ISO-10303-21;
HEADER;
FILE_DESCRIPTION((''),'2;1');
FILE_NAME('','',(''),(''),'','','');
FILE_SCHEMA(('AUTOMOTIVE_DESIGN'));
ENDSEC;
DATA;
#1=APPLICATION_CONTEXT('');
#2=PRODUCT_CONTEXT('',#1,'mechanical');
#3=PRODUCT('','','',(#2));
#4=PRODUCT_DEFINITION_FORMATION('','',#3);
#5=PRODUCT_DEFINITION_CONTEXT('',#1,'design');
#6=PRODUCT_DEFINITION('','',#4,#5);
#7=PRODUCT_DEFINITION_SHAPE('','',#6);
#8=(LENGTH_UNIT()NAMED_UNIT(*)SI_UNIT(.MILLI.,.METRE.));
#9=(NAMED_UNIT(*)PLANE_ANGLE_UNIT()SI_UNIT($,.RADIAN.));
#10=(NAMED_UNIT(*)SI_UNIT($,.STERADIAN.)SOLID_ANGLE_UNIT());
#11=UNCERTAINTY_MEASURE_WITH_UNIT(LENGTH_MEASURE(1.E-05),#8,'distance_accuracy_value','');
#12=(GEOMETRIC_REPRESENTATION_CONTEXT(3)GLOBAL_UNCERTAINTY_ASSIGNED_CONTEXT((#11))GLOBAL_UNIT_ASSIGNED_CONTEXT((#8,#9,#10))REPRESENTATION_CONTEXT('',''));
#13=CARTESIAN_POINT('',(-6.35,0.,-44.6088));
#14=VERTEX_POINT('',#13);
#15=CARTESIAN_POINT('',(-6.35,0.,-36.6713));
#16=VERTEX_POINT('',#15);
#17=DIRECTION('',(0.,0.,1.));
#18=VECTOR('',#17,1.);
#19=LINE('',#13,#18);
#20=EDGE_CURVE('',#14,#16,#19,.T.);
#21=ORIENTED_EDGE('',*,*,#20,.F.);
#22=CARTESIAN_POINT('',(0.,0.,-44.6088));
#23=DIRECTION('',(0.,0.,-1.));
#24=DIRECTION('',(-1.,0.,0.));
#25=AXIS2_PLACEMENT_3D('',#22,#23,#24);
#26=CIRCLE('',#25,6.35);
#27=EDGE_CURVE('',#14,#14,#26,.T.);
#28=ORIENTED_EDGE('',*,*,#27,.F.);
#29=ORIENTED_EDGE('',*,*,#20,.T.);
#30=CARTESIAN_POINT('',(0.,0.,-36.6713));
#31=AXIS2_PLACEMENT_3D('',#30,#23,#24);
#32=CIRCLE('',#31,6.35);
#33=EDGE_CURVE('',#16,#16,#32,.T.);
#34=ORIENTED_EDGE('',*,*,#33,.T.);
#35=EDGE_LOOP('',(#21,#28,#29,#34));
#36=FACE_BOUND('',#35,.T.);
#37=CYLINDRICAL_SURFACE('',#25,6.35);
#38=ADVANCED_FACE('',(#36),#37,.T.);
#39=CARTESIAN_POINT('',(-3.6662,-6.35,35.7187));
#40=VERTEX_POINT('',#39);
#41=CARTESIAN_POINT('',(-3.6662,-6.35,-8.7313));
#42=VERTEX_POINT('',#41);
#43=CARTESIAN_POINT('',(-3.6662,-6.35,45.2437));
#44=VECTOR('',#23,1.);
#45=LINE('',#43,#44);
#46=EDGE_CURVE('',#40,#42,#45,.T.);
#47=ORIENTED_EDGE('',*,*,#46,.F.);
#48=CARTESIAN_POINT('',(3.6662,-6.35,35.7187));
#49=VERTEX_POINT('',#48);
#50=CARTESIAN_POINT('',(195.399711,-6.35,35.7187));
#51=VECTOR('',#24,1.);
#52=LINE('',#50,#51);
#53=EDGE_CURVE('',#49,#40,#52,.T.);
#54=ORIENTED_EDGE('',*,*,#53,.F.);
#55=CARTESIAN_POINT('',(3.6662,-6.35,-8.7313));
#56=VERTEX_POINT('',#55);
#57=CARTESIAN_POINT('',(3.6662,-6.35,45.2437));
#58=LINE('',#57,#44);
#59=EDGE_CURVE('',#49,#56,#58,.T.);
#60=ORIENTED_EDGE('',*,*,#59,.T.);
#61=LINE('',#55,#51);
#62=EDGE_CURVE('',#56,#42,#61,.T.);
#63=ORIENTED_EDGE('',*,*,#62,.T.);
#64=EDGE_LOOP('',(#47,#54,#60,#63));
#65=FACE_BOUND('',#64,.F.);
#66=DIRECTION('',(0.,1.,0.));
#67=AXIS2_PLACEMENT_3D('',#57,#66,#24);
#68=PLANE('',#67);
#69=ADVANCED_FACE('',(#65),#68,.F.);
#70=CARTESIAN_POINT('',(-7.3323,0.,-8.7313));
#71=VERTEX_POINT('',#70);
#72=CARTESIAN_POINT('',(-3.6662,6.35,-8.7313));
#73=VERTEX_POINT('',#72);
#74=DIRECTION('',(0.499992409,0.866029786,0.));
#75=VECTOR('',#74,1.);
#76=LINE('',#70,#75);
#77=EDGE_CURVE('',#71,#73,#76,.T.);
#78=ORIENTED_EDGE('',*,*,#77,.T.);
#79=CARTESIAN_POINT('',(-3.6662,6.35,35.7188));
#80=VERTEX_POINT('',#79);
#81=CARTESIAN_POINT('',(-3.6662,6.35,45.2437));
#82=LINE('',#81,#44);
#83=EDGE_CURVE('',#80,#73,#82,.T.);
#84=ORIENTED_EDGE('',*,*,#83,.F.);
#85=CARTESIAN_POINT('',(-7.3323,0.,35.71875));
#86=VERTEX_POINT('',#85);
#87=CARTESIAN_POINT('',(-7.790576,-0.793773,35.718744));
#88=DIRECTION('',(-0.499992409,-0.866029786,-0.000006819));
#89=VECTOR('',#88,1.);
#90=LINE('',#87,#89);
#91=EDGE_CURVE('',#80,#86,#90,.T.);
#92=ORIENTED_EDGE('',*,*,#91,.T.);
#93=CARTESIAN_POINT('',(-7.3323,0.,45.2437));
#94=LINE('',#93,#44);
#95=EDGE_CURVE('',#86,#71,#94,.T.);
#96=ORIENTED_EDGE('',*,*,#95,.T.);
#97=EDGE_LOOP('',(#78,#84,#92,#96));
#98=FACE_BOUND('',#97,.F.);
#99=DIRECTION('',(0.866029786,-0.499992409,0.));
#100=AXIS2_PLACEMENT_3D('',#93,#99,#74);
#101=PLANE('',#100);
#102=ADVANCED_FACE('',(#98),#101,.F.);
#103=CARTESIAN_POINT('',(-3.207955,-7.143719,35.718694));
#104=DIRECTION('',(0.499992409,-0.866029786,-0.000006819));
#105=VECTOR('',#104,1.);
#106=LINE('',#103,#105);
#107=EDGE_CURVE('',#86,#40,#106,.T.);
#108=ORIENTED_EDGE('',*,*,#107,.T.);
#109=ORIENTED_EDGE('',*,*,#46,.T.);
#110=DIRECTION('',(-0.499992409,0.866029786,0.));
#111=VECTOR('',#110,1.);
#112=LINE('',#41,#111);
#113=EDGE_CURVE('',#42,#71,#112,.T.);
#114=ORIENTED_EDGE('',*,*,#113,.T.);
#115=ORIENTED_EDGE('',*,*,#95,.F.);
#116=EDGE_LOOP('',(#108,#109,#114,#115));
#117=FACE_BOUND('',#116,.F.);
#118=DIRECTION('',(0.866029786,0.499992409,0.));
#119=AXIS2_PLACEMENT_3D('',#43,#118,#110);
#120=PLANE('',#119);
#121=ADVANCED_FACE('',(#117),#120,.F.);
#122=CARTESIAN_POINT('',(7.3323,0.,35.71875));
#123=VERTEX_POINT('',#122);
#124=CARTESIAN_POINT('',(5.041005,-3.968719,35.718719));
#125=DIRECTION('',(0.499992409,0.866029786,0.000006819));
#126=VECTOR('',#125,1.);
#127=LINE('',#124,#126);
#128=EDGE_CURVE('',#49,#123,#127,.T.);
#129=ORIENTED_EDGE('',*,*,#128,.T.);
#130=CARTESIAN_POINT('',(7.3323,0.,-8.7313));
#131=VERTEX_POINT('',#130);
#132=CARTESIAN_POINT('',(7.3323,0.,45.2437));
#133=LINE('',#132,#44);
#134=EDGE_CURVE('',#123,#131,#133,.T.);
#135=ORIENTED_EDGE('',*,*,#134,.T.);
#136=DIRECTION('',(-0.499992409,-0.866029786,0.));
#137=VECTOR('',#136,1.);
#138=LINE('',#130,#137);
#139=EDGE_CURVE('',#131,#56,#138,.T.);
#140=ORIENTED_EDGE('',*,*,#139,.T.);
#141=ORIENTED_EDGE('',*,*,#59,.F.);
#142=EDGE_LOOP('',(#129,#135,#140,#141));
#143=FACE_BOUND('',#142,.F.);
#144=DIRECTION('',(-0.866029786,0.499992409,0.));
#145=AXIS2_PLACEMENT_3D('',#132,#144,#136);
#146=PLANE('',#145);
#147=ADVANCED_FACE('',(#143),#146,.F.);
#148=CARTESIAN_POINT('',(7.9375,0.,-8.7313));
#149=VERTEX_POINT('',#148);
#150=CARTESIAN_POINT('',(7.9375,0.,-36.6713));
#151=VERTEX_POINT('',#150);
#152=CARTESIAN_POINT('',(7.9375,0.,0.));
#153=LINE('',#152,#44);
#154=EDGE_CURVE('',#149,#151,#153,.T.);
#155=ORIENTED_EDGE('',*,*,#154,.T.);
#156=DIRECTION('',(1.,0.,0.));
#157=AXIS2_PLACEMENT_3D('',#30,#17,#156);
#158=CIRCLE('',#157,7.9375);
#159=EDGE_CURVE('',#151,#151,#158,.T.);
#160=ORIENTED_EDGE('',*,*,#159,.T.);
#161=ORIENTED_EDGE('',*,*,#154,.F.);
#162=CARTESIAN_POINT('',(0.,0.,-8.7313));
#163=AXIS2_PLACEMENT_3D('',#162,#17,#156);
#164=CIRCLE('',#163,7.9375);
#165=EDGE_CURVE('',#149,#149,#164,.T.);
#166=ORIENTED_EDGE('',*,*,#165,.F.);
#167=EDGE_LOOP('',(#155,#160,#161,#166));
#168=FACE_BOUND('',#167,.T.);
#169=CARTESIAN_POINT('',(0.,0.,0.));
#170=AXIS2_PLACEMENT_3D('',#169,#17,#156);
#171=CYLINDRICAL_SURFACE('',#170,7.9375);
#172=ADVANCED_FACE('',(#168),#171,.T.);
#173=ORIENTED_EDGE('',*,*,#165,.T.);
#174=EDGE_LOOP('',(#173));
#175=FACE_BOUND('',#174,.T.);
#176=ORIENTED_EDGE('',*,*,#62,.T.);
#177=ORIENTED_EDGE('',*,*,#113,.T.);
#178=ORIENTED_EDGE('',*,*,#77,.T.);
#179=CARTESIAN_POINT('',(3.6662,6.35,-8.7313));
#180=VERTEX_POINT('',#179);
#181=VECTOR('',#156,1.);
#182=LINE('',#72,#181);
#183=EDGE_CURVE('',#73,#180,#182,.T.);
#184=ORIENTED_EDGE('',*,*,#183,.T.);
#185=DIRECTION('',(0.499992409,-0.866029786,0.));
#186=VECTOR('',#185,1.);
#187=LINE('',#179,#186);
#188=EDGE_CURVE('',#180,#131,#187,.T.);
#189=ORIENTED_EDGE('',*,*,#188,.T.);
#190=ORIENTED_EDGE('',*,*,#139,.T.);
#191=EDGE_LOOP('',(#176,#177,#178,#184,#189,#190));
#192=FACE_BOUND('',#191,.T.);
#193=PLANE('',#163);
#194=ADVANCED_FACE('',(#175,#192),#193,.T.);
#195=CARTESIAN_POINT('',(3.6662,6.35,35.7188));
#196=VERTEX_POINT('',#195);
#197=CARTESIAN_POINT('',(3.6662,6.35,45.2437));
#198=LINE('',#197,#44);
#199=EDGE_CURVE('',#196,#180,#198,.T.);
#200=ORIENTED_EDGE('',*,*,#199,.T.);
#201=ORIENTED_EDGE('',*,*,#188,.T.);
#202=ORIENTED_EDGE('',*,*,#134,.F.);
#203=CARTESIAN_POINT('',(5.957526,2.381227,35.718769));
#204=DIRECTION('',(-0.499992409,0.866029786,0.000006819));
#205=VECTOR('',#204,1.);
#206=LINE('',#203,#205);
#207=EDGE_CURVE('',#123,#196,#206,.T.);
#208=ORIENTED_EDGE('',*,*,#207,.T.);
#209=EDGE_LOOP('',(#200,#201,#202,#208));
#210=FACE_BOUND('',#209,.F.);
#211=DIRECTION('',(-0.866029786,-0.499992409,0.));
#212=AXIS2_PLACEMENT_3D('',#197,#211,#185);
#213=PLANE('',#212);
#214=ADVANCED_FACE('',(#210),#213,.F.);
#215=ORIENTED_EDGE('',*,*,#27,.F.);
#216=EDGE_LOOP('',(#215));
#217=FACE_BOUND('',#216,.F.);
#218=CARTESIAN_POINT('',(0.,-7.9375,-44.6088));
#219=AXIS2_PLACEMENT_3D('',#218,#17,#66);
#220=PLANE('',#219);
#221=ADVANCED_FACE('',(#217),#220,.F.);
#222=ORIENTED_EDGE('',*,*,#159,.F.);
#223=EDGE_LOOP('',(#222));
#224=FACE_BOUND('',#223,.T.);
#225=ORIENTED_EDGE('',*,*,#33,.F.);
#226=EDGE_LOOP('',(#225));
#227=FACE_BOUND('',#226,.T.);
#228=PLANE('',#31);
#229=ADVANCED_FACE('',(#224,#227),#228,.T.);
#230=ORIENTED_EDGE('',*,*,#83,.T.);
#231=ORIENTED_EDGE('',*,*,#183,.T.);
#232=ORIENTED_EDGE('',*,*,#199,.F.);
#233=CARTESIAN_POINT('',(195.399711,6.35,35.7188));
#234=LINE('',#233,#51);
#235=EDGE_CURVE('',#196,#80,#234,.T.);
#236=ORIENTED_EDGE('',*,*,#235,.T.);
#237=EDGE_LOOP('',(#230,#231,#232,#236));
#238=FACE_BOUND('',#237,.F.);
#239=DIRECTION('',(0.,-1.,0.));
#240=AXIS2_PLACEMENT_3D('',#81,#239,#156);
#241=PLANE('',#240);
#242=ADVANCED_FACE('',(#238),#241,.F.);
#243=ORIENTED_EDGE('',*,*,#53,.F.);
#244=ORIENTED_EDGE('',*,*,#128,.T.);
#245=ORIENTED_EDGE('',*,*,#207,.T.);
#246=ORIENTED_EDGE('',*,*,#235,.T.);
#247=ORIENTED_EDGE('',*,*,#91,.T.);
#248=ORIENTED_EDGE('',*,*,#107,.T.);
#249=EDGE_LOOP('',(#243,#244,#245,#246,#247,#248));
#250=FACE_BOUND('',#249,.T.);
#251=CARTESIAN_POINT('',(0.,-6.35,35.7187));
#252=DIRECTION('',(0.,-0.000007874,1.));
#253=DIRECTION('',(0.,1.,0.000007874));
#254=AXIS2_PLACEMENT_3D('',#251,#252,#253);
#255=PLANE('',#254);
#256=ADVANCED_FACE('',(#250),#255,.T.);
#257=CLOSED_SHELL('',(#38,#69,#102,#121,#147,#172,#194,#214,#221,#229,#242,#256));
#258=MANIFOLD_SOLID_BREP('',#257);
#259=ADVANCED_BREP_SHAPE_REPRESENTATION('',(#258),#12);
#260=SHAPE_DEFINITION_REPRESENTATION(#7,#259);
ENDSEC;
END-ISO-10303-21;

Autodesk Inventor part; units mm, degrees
ref_plane "YZ Plane" through (0, 0, 0) normal (1, 0, 0) x (0, 1, 0)
ref_plane "XZ Plane" through (0, 0, 0) normal (0, 1, 0) x (-1, 0, 0)
ref_plane "XY Plane" through (0, 0, 0) normal (0, 0, 1) x (1, 0, 0)
sketch "Sketch1" plane through (0, 0, 0) normal (0, 0, 1) x (1, 0, 0)
  circle A0 centre (0, 0) radius 7.9375
  dimension "d0" = 15.875
extrude "Extrusion1" add sketch "Sketch1" along normal mid plane 90.4875
sketch "Sketch2" plane through (0, 0, 45.2437) normal (0, 0, 1) x (1, 0, 0)
  line L0 (-3.6662, 6.35) -> (3.6662, 6.35)
  line L1 (3.6662, 6.35) -> (7.3323, 0)
  line L2 (7.3323, 0) -> (3.6662, -6.35)
  line L3 (3.6662, -6.35) -> (-3.6662, -6.35)
  line L4 (-3.6662, -6.35) -> (-7.3323, 0)
  line L5 (-7.3323, 0) -> (-3.6662, 6.35)
  circle A0 centre (0, 0) radius 7.9375 projected
  point P0 (0, -6.35)
  point P1 (0, 6.35)
  dimension "d3" = 12.7
extrude "Extrusion2" cut sketch "Sketch2" against normal blind 53.975
sketch "Sketch3" plane through (0, 0, 45.2437) normal (0, 0, 1) x (1, 0, 0)
  circle A0 centre (0, 0) radius 6.35
  circle A1 centre (0, 0) radius 7.9375 projected
  line L0 (3.6662, 6.35) -> (-3.6662, 6.35) projected
  line L1 (7.3323, 0) -> (3.6662, 6.35) projected
  line L2 (3.6662, -6.35) -> (7.3323, 0) projected
  line L3 (-3.6662, -6.35) -> (3.6662, -6.35) projected
  line L4 (-7.3323, 0) -> (-3.6662, -6.35) projected
  line L5 (-3.6662, 6.35) -> (-7.3323, 0) projected
  point P0 (-5.4993, 3.175)
  point P1 (0, 6.35)
  point P2 (-5.4993, -3.175)
  point P3 (0, -6.35)
  point P4 (5.4993, -3.175)
  point P5 (5.4993, 3.175)
  dimension "d6" = 12.7
extrude "Extrusion3" cut sketch "Sketch3" against normal blind 6.35 contours A0 L1 L2 | A0 L0 L1 | L2 L3 A0 | A0 L5 L0 | L3 L4 A0 | A0 L4 L5
sketch "Sketch6" plane through (0, 0, 0) normal (1, 0, 0) x (0, 1, 0)
  line L0 (7.9375, -45.2437) -> (-7.9375, -45.2437) construction
  line L1 (-7.9375, -45.2437) -> (-7.9375, -8.7312) construction
  line L2 (-7.9375, -8.7312) -> (-6.35, -8.7312) construction
  line L3 (-6.35, -8.7312) -> (-6.35, 38.8938) construction
  line L4 (-6.35, 38.8938) -> (-6.35, 45.2437) construction
  line L5 (-6.35, 45.2437) -> (6.35, 45.2437) construction
  line L6 (6.35, 45.2437) -> (6.35, 38.8938) construction
  line L7 (6.35, 38.8938) -> (6.35, -8.7312) construction
  line L8 (6.35, -8.7312) -> (7.9375, -8.7312) construction
  line L9 (7.9375, -8.7312) -> (7.9375, -45.2437) construction
  line L10 (6.35, 45.2437) -> (-6.35, 45.2437)
  line L11 (-6.35, 45.2437) -> (-6.35, 35.7187)
  line L12 (-6.35, 35.7187) -> (6.35, 35.7188)
  line L13 (6.35, 35.7188) -> (6.35, 45.2437)
  line L14 (7.9375, -45.2437) -> (-7.9375, -45.2437)
  line L15 (-7.9375, -45.2437) -> (-7.9375, -44.6088)
  line L16 (-7.9375, -44.6088) -> (7.9375, -44.6088)
  line L17 (7.9375, -44.6088) -> (7.9375, -45.2437)
  point P0 (0, 0)
  dimension "d15" = 9.525
  dimension "d16" = 0.635
extrude "Extrusion6" cut sketch "Sketch6" along normal through all both and the other way through all
sketch "Sketch7" plane through (0, 0, -44.6088) normal (0, 0, -1) x (-1, 0, 0)
  circle A0 centre (0, 0) radius 6.35
  circle A1 centre (0, 0) radius 7.9375
  circle A2 centre (0, 0) radius 7.9375 construction
  dimension "d19" = 12.7
extrude "Extrusion7" cut sketch "Sketch7" against normal blind 7.9375
properties part number "EL2-C2-002" material "Aluminum 6061"
